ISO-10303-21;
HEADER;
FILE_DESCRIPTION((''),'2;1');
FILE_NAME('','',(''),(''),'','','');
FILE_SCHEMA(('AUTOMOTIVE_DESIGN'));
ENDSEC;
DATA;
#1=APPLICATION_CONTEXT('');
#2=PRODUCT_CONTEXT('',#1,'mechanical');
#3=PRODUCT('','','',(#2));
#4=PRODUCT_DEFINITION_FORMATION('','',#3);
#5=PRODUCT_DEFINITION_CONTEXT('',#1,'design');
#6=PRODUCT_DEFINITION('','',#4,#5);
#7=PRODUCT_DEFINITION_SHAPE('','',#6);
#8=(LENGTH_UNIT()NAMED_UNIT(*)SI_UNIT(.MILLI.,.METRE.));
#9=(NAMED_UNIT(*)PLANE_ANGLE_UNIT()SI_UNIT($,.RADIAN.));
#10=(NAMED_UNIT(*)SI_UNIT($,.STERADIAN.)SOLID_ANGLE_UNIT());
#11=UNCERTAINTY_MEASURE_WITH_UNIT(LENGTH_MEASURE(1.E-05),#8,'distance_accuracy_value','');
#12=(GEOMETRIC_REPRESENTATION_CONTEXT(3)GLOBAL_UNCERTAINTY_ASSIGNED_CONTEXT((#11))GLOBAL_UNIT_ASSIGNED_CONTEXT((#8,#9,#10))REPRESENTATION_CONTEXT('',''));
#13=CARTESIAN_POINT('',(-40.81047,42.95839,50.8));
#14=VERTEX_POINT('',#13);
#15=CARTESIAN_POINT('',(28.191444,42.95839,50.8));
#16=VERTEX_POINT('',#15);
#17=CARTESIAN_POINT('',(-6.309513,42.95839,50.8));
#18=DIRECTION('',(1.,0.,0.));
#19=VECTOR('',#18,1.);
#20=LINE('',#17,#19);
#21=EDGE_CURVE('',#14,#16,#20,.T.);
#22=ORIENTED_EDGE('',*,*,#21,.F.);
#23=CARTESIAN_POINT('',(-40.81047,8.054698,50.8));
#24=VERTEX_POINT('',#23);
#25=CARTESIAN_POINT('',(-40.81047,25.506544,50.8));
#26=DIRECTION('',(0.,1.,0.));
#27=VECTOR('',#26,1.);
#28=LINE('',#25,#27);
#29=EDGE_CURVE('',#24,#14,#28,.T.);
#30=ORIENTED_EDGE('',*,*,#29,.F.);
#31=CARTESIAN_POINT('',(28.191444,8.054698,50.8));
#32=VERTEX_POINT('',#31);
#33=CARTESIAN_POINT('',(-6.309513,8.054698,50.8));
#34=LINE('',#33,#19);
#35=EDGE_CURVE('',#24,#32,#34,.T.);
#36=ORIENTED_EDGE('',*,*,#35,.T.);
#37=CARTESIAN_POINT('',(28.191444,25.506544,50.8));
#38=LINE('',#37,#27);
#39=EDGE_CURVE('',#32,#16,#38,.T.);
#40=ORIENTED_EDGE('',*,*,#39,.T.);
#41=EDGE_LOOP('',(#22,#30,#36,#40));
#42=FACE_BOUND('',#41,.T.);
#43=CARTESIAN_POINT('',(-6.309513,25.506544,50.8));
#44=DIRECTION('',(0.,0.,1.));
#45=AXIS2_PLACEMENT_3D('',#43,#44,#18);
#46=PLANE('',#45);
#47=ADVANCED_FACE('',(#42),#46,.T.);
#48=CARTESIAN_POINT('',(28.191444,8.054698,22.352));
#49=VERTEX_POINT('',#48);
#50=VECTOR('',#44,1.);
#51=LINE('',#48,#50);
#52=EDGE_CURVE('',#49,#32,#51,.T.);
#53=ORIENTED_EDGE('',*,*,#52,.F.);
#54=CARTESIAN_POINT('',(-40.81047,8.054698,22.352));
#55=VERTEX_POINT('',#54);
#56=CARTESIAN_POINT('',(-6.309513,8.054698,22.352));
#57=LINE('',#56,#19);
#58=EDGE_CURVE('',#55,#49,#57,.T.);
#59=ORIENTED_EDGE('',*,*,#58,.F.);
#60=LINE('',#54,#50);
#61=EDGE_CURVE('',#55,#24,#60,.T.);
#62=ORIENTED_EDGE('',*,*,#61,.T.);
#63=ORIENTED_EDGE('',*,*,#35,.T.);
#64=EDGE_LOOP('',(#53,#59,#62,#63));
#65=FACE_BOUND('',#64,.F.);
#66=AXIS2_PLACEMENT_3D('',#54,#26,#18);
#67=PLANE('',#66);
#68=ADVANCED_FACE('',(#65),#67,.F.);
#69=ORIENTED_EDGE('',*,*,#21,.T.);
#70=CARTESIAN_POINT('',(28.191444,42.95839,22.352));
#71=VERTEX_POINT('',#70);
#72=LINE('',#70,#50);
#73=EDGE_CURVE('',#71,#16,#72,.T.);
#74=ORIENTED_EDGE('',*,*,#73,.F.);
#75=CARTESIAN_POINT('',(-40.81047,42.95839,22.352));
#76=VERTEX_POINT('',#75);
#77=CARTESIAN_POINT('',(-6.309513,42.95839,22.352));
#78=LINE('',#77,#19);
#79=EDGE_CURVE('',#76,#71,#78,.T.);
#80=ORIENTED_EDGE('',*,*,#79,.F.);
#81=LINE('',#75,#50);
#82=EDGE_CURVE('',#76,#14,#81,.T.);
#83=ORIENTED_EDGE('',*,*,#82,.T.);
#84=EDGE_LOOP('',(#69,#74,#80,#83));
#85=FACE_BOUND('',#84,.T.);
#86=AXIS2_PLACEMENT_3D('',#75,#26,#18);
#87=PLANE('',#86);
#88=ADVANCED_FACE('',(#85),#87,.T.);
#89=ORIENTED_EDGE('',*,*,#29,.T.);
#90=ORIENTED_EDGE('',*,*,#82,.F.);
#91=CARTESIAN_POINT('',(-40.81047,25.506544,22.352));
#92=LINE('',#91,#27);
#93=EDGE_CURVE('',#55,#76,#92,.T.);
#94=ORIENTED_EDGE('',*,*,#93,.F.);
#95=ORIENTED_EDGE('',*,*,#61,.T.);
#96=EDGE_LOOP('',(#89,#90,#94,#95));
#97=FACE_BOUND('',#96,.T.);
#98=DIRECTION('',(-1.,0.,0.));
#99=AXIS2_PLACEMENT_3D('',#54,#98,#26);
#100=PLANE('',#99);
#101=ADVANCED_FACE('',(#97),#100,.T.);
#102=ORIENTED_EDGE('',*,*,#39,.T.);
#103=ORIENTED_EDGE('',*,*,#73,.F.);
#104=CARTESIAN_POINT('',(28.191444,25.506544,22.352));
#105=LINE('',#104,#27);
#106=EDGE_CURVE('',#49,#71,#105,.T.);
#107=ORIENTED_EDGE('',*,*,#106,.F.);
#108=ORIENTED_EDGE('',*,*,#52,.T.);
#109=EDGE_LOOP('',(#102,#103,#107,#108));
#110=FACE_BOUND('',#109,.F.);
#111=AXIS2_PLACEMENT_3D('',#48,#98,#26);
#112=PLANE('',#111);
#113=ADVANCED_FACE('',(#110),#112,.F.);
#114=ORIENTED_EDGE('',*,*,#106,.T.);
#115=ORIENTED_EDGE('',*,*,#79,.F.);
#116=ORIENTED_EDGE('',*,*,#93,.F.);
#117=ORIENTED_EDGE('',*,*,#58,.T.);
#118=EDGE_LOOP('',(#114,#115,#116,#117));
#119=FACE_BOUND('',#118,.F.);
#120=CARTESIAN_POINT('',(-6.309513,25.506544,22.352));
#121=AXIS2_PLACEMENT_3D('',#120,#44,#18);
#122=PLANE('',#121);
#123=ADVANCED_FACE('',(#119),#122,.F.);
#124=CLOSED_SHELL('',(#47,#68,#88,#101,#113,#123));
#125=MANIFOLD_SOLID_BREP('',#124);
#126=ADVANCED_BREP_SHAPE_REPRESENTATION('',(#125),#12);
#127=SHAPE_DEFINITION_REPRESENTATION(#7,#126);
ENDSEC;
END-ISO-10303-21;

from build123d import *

# Parameters (mm, degrees)
F1_START = 22.352
F0_W     = 69.0019130707
F0_H     = 34.9036920816
F1_DEPTH = 28.448


# Not quite as in the source:
# - a feature names something its author has since deleted; it is built from what else it names


with BuildPart() as f1:
    # F0 (on Top) → F1 (new body)
    with BuildSketch(Plane.XY.offset(F1_START)):
        with Locations((-6.3095130026, 25.5065439269)):
            Rectangle(F0_W, F0_H)
    extrude(amount=F1_DEPTH)


solid = f1.part
